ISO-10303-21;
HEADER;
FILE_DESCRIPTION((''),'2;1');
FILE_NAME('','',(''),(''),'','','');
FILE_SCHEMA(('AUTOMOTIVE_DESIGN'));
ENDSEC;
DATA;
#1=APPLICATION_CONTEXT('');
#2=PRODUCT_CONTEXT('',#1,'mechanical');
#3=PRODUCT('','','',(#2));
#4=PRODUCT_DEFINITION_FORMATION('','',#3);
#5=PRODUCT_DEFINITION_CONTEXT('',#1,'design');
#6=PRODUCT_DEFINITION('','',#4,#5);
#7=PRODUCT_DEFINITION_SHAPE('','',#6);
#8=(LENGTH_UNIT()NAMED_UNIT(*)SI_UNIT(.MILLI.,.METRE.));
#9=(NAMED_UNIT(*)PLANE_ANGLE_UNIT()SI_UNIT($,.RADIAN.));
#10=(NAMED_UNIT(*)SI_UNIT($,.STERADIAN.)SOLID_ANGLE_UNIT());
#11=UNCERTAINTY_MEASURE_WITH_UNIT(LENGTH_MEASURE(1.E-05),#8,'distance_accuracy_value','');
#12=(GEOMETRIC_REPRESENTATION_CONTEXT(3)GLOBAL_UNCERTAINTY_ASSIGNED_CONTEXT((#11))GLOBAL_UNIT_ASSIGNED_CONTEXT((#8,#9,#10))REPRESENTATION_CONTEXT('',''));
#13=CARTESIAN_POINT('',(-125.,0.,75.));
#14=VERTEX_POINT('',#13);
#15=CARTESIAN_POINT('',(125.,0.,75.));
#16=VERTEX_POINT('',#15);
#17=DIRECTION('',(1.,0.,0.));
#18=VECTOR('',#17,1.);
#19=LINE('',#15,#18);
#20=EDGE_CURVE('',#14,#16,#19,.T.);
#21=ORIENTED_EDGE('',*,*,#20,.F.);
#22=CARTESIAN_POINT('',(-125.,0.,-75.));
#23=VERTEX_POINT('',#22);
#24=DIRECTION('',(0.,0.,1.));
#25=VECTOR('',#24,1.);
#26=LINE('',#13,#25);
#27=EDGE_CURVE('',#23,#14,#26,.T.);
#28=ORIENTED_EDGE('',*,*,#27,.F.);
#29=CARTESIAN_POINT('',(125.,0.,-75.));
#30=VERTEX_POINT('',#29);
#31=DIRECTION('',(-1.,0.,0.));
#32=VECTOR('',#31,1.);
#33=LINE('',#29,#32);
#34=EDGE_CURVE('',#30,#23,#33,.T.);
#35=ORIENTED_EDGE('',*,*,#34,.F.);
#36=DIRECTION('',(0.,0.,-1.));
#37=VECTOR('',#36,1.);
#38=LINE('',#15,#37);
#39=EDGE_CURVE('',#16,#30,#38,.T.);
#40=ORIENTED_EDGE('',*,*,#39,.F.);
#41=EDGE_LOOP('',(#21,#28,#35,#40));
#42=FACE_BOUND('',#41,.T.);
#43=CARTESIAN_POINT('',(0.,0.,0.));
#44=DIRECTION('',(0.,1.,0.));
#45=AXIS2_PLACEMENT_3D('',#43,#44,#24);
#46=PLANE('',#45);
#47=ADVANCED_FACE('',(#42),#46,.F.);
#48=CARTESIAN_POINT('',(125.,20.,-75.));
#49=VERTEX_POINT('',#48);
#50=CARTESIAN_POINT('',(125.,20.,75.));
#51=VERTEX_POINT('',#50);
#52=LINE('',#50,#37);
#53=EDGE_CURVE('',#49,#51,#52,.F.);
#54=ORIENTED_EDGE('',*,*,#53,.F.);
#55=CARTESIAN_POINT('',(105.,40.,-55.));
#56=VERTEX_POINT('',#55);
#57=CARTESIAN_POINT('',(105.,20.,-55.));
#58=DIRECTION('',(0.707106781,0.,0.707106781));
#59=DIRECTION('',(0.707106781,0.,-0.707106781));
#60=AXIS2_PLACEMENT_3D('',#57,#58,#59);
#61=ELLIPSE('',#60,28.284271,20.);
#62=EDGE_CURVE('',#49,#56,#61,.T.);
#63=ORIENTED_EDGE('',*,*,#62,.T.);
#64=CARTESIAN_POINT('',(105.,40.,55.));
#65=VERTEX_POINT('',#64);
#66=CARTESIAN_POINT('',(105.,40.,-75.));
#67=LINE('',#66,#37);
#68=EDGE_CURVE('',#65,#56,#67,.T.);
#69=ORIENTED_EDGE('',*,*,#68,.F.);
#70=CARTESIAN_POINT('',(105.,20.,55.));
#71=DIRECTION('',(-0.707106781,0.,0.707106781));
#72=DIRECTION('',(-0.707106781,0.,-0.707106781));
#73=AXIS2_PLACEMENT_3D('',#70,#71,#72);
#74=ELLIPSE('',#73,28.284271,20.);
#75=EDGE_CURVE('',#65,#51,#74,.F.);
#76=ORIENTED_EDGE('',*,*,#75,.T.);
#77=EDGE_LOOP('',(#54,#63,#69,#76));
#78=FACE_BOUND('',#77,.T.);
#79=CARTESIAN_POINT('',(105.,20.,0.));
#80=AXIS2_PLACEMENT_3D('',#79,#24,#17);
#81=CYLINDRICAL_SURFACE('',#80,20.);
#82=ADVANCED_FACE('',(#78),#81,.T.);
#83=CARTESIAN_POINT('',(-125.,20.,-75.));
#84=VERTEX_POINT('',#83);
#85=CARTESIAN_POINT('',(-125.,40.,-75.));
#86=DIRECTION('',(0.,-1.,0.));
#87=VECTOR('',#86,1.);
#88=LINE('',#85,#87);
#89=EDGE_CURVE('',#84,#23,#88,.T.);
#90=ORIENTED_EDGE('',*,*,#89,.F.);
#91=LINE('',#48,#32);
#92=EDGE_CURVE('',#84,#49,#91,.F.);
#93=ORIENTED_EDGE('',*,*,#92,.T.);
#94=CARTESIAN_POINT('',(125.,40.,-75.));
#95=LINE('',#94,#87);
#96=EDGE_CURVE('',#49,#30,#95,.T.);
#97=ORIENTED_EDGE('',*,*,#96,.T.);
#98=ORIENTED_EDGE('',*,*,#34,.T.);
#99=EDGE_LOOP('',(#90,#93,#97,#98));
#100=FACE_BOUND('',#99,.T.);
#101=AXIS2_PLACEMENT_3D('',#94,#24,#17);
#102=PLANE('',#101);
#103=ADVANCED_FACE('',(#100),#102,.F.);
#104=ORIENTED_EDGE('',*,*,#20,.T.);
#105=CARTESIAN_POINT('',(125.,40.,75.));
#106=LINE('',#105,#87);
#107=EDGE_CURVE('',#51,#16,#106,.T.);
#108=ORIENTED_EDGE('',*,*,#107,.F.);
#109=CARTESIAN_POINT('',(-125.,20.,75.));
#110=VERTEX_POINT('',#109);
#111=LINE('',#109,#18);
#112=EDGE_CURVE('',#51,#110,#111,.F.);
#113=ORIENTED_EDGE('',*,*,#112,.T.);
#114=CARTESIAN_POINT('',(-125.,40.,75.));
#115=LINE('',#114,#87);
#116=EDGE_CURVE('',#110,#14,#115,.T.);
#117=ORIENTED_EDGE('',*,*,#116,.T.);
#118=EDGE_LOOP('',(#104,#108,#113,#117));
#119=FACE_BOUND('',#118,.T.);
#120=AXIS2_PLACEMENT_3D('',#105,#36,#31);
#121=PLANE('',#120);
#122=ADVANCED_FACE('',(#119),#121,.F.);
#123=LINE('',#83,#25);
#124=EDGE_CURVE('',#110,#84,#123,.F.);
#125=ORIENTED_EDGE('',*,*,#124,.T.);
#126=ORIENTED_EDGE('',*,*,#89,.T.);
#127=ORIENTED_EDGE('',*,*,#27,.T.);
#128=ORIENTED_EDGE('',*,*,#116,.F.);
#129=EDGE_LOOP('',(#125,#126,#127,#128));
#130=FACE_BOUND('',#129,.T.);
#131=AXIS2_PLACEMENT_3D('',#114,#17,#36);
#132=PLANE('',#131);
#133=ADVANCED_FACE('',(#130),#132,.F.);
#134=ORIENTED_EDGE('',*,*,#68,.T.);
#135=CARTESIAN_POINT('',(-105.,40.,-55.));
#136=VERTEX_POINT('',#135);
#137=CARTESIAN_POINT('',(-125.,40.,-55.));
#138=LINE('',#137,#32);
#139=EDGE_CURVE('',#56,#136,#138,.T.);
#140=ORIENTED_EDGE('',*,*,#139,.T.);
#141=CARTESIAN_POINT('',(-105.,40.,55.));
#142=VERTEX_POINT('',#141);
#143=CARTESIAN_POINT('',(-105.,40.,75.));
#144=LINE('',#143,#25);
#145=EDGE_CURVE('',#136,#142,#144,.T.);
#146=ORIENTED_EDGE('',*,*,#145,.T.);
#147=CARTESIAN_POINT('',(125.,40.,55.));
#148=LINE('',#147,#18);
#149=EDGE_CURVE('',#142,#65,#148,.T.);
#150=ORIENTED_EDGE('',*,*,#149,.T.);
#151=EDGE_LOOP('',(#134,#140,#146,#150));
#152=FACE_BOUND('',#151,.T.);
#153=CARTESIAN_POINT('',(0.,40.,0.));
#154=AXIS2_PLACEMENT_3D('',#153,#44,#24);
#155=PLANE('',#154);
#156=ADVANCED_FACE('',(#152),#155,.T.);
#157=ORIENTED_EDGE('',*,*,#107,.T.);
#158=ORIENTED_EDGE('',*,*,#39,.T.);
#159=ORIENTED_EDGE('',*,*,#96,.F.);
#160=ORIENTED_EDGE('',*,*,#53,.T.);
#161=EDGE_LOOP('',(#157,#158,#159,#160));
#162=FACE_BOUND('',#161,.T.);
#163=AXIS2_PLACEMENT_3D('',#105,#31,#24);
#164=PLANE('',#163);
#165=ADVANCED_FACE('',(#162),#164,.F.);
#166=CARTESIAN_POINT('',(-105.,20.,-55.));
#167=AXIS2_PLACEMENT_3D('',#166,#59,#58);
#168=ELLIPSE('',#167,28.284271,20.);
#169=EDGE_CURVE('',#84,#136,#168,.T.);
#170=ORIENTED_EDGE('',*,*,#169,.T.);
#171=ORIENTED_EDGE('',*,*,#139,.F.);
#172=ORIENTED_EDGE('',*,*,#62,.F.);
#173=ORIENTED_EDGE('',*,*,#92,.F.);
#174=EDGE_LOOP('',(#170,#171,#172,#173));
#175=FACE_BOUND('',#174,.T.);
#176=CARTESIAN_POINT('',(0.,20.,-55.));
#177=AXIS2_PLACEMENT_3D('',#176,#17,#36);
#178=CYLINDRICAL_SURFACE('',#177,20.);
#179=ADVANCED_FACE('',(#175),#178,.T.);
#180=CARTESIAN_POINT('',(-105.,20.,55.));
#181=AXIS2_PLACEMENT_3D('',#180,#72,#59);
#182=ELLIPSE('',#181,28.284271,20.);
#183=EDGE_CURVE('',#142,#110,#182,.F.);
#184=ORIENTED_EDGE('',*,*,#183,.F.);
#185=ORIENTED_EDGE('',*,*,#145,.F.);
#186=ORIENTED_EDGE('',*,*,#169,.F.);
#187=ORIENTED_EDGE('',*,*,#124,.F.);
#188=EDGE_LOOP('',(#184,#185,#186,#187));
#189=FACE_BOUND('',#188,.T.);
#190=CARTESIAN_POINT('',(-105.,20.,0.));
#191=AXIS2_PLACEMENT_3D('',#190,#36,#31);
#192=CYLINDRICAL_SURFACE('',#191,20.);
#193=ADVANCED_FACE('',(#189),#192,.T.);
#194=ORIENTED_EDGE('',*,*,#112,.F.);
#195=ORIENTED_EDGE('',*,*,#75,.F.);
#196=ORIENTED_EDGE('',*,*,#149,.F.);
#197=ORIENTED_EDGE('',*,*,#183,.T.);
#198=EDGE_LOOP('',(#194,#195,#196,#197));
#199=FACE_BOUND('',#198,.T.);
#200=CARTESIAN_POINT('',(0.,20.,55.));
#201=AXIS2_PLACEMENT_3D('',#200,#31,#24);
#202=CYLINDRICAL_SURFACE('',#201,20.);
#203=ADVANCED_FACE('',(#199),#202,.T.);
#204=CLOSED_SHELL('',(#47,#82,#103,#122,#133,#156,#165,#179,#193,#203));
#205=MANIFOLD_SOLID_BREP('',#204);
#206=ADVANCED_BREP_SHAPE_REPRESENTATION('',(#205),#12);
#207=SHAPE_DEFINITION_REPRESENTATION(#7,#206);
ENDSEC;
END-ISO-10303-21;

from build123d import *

# Parameters (mm, degrees)
SKETCH1_W           = 250
SKETCH1_H           = 150
BOSS_EXTRUDE1_DEPTH = 40
FILLET1_START       = -75
FILLET1_DEPTH       = 150
FILLET1_START_2     = -126
FILLET1_2_DEPTH     = 252


with BuildPart() as part:
    # Sketch1 → Boss-Extrude1 (new body)
    with BuildSketch(Plane(origin=(0, 0, 0), x_dir=(1, 0, 0), z_dir=(0, 1, 0))):
        Rectangle(SKETCH1_W, SKETCH1_H)
    extrude(amount=BOSS_EXTRUDE1_DEPTH)

    # Fillet1: read off the stored shape, not the designer's step
    # Fillet1 outline → Fillet1 (cut)
    with BuildSketch(Plane.XY.offset(FILLET1_START)):
        with BuildLine():
            Line((-125, 40), (-125, 20))
            ThreePointArc((-125, 20), (-119.142135624, 34.142135624), (-105, 40))
            Line((-105, 40), (-125, 40))
        make_face()
        with BuildLine():
            Line((125, 40), (105, 40))
            ThreePointArc((105, 40), (119.142135624, 34.142135624), (125, 20))
            Line((125, 20), (125, 40))
        make_face()
    extrude(amount=FILLET1_DEPTH, mode=Mode.SUBTRACT)

    # Fillet1 2 outline → Fillet1 2 (cut)
    with BuildSketch(Plane.YZ.offset(FILLET1_START_2)):
        with BuildLine():
            Line((40, 75), (20, 75))
            ThreePointArc((20, 75), (34.142135624, 69.142135624), (40, 55))
            Line((40, 55), (40, 75))
        make_face()
        with BuildLine():
            Line((40, -75), (40, -55))
            ThreePointArc((40, -55), (34.142135624, -69.142135624), (20, -75))
            Line((20, -75), (40, -75))
        make_face()
    extrude(amount=FILLET1_2_DEPTH, mode=Mode.SUBTRACT)


solid = part.part
